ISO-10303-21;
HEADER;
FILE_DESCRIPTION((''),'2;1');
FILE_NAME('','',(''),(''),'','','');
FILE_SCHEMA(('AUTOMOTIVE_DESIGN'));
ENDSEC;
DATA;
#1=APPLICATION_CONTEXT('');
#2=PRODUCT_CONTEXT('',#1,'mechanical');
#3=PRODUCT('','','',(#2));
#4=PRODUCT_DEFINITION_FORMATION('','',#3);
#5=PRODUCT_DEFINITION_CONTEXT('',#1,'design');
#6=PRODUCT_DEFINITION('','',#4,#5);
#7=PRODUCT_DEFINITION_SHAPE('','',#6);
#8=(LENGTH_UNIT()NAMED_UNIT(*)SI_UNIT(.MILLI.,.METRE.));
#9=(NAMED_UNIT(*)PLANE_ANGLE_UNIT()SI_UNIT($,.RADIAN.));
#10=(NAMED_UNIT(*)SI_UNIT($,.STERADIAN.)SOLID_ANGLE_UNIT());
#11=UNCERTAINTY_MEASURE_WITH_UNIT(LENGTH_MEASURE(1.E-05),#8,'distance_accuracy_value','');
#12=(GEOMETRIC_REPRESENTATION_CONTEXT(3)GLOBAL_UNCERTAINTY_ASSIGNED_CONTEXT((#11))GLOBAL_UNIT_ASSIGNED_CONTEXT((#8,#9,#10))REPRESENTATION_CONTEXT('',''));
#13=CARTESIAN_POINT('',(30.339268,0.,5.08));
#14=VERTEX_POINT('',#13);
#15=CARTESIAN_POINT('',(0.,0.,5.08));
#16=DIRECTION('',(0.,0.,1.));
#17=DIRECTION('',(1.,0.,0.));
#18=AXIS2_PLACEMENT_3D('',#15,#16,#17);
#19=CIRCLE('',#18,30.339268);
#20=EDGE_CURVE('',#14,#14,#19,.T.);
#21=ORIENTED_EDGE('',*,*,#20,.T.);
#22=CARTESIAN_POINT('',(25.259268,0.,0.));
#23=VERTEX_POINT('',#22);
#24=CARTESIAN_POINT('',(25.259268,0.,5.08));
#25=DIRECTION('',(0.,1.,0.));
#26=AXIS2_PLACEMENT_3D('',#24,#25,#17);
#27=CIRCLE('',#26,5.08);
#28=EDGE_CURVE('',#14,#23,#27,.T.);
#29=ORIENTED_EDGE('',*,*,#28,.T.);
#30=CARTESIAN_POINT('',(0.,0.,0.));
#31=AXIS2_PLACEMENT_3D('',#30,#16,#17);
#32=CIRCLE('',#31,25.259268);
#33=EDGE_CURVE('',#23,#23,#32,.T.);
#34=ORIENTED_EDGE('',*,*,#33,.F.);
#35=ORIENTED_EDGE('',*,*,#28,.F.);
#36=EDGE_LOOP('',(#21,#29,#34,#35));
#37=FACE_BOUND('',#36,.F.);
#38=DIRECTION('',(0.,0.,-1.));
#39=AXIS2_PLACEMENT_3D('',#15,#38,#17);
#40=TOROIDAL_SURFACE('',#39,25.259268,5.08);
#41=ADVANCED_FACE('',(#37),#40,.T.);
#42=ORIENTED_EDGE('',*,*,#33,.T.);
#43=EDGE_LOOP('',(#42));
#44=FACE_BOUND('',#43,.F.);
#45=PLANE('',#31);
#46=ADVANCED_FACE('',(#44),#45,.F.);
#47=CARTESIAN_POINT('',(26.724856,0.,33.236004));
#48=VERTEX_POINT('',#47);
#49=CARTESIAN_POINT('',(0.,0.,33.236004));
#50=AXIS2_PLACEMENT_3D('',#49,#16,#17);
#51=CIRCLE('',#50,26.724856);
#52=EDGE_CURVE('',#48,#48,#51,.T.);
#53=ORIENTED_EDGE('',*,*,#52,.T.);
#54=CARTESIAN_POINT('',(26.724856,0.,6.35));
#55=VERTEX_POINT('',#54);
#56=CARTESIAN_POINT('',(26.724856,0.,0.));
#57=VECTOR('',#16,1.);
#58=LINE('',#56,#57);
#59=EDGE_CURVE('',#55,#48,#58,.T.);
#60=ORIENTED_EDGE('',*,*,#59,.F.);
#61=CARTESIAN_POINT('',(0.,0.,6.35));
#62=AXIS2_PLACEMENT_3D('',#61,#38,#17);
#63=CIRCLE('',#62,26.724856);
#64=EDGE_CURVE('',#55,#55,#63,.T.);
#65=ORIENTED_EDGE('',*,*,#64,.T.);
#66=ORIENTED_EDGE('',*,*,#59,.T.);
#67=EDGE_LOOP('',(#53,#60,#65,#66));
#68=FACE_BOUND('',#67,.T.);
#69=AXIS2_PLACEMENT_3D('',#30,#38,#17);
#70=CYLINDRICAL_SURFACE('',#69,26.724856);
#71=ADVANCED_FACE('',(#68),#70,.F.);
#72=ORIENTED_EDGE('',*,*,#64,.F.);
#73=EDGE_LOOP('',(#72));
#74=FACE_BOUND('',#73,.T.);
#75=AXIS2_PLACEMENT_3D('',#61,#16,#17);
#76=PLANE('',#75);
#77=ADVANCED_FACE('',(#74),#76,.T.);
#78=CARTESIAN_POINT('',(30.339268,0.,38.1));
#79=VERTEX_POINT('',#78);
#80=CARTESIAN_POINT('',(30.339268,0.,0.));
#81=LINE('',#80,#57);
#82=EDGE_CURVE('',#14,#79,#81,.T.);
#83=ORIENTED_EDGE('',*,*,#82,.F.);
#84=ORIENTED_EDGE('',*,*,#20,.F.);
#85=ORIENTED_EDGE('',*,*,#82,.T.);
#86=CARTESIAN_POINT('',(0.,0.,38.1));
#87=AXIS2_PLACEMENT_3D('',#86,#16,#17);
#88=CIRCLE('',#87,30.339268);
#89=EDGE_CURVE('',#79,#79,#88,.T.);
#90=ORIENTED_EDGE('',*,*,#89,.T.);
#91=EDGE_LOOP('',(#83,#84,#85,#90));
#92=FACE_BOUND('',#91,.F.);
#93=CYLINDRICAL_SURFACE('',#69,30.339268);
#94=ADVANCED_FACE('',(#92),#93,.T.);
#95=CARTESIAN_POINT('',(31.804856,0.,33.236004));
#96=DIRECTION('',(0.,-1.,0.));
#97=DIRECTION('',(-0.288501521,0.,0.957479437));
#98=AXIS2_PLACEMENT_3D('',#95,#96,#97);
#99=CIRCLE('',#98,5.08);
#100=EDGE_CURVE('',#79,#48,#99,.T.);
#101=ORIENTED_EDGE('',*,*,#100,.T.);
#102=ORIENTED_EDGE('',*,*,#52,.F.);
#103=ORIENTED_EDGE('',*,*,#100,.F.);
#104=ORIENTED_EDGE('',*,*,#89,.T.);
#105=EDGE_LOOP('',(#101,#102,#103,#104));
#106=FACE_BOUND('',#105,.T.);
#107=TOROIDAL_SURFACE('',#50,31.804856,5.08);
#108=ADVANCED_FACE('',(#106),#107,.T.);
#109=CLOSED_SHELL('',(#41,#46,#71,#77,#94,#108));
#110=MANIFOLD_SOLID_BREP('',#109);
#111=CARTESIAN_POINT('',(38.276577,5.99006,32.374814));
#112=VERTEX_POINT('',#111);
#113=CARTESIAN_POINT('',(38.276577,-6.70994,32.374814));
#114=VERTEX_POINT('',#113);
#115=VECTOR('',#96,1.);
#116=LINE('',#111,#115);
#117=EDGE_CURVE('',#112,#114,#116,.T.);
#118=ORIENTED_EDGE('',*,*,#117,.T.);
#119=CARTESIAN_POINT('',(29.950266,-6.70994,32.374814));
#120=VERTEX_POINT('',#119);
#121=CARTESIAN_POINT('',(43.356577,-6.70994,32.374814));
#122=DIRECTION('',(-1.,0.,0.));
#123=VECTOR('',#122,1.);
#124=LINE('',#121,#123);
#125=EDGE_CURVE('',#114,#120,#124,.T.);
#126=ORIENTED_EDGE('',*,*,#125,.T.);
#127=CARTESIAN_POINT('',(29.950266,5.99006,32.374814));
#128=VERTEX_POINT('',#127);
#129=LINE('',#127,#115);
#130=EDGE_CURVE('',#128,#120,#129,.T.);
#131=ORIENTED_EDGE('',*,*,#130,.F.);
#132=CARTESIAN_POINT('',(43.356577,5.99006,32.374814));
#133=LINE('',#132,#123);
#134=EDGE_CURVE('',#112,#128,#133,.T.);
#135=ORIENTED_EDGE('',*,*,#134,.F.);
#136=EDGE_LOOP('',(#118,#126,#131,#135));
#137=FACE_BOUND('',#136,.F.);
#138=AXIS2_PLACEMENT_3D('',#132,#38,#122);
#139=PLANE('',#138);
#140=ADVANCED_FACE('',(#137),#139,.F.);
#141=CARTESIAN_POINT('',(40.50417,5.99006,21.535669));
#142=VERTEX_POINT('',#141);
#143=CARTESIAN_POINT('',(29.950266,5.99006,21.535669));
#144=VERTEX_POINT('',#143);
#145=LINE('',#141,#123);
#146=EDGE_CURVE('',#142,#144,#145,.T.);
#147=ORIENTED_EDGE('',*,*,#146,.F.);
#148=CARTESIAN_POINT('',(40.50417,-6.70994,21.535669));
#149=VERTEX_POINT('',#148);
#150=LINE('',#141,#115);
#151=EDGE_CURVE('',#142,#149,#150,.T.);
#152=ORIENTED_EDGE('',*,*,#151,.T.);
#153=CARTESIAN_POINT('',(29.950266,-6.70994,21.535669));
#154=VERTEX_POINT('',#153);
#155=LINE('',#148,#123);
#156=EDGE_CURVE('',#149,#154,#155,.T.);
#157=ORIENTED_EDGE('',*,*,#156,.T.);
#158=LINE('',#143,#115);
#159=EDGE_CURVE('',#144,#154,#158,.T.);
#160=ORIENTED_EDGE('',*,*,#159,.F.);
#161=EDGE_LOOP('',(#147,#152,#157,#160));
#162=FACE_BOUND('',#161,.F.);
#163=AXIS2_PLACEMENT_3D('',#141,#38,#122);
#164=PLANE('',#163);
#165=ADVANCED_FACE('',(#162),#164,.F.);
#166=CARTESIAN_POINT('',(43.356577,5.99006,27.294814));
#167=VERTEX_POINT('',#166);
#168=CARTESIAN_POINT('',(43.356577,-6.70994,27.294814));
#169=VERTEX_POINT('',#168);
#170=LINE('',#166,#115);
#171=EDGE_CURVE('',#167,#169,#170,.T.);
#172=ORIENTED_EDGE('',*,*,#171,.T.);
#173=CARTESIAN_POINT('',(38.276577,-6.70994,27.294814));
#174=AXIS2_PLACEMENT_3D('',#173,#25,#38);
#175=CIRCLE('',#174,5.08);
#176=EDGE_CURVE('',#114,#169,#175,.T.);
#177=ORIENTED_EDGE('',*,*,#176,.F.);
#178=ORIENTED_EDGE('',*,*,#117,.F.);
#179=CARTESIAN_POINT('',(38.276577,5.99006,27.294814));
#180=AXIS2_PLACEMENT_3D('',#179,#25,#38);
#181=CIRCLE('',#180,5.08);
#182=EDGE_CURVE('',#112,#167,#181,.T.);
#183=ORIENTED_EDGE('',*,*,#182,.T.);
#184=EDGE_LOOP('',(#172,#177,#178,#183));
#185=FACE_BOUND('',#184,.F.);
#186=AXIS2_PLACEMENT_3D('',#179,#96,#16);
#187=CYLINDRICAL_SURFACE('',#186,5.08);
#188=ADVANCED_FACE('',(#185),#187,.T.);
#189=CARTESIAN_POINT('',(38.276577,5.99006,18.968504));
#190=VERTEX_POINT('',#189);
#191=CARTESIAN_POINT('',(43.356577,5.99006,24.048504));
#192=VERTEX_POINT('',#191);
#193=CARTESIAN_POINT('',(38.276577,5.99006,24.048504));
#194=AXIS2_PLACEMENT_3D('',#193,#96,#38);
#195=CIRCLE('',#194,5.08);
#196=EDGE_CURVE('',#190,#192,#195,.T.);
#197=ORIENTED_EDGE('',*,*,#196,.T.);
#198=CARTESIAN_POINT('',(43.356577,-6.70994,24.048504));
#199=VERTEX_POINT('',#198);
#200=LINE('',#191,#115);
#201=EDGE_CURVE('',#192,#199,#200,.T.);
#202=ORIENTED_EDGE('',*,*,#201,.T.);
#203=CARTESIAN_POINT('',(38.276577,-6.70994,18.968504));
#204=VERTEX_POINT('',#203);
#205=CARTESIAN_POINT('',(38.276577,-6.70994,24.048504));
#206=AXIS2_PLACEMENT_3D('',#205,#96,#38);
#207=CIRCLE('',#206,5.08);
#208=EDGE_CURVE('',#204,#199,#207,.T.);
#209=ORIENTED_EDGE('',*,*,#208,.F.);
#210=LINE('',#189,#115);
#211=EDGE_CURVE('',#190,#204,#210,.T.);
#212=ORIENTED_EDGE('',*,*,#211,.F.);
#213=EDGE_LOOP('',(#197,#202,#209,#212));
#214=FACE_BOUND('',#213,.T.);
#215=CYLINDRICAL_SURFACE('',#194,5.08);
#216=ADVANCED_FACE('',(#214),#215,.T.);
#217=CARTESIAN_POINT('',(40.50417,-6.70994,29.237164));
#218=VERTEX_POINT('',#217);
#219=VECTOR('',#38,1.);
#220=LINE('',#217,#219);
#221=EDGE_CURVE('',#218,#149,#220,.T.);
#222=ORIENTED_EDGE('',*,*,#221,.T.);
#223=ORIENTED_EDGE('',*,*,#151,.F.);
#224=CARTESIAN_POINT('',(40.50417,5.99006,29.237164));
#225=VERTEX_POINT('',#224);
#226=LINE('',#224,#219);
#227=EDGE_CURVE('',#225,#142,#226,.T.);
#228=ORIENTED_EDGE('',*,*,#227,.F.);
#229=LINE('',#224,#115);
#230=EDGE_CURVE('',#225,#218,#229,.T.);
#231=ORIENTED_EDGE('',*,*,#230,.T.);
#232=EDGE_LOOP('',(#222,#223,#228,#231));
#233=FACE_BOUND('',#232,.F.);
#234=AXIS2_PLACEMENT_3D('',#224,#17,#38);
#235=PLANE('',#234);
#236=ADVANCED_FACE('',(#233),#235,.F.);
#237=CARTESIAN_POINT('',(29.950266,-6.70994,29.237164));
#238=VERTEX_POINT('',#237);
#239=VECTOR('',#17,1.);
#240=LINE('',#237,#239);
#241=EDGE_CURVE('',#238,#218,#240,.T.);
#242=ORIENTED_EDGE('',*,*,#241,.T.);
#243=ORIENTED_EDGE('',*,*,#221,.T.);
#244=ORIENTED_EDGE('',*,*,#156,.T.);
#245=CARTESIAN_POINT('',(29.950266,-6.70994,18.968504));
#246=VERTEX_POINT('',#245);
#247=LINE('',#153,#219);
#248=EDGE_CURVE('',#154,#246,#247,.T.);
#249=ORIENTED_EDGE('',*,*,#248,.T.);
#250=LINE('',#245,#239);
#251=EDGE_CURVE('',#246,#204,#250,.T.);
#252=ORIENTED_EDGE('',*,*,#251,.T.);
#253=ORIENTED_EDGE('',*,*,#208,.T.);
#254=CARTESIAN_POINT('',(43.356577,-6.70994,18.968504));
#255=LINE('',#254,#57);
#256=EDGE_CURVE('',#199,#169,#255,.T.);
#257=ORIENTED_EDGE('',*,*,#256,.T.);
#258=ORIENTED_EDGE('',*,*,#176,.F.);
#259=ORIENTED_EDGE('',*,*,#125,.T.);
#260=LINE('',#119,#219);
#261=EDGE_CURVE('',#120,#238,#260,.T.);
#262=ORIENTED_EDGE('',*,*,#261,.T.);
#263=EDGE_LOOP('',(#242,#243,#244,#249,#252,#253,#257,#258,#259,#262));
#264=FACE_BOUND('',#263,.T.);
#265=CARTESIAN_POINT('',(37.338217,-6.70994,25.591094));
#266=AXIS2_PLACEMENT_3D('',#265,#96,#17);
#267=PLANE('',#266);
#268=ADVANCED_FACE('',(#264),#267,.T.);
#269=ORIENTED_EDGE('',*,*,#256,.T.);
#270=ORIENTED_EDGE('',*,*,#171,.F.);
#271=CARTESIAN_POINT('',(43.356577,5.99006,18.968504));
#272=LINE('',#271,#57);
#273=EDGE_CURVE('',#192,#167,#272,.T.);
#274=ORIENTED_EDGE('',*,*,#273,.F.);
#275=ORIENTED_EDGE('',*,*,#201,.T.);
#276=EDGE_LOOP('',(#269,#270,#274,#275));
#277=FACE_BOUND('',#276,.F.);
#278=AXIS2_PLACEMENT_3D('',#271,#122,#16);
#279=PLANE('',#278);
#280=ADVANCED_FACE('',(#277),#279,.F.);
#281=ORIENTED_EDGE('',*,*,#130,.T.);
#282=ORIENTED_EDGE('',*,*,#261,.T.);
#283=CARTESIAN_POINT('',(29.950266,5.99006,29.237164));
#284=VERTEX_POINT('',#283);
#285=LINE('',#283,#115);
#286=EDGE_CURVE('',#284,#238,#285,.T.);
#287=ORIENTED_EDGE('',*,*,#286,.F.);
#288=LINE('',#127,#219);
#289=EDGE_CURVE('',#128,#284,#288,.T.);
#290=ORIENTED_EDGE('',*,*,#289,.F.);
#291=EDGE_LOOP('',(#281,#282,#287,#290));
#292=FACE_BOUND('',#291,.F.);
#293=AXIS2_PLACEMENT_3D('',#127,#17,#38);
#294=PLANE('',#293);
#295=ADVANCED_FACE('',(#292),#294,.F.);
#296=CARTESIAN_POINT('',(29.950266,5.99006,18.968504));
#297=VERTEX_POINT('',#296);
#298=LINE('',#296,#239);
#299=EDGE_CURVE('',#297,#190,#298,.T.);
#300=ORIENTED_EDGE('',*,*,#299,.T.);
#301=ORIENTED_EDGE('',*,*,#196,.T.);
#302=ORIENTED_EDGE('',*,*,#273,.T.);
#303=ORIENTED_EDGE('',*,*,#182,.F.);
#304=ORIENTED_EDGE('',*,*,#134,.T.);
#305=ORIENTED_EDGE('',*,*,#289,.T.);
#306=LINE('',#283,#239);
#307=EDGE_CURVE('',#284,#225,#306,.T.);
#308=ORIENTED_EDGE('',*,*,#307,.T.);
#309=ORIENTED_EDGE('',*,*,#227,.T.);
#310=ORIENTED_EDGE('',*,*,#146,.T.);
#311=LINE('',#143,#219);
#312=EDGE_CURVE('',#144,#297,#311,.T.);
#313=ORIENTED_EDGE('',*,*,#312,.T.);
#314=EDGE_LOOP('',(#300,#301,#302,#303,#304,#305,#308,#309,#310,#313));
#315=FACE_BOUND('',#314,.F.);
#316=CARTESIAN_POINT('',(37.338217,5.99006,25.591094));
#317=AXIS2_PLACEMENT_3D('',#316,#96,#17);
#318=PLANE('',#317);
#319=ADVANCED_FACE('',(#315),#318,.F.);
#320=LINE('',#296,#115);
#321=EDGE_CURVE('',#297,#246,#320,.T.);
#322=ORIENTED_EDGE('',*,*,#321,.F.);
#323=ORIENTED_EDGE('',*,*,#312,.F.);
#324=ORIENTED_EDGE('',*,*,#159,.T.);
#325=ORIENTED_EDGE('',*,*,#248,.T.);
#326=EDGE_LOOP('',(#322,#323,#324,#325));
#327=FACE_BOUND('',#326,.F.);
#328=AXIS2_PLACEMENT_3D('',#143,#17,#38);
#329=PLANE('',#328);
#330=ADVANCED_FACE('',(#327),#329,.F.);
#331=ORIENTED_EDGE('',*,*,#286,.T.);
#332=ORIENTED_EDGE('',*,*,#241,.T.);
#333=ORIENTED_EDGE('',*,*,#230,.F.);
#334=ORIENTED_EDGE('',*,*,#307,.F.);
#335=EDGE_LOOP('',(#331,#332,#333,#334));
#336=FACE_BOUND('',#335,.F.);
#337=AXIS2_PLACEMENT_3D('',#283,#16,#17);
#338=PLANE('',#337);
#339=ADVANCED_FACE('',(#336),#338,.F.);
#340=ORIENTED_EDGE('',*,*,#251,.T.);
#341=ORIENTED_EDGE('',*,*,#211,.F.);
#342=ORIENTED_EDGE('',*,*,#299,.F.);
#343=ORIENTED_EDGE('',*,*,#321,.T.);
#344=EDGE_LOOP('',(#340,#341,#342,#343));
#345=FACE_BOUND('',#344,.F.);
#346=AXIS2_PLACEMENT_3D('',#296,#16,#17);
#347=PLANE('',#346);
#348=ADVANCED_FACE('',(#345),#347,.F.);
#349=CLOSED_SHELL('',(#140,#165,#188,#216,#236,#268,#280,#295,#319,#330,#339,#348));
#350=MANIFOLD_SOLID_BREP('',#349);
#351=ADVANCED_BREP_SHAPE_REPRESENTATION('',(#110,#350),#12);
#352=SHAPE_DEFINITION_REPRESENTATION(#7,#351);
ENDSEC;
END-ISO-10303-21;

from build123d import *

# Parameters (mm, degrees)
F0_R     = 30.3392677901
F0_R_2   = 26.724855518
F1_DEPTH = 38.1
F2_R     = 26.7339886214
F3_DEPTH = 6.35
F5_DEPTH = 12.7
F8_R     = 5.08


# Not quite as in the source:
# - a fillet or chamfer that OpenCascade refuses, or shapes differently, is made with other operations: its cross-section is extruded or revolved along the edge and cut away or added


with BuildPart() as f1:
    # F0 (on Top) → F1 (new body)
    with BuildSketch(Plane.XY):
        Circle(F0_R)
        Circle(F0_R_2, mode=Mode.SUBTRACT)
    extrude(amount=F1_DEPTH)

    # F2 (on Top) → F3 (join)
    with BuildSketch(Plane.XY):
        Circle(F2_R)
    extrude(amount=F3_DEPTH)

    # F7: fillet of radius 5.08 on 2 edges, made by hand

    # F7_s1 → F7_t2 (revolve, cut)
    with BuildSketch(Plane.XZ):
        with BuildLine():
            ThreePointArc((30.3392677901, 38.1), (27.7273816887, 36.2659561382), (26.724855518, 33.2360044601))
            Line((26.724855518, 33.2360044601), (26.724855518, 38.1))
            Line((26.724855518, 38.1), (30.3392677901, 38.1))
        make_face()
    revolve(axis=Axis((0, 0, 38.1), (0, 0, 1)), mode=Mode.SUBTRACT)

    # F7_s3 → F7_t4 (revolve, cut)
    with BuildSketch(Plane.XZ):
        with BuildLine():
            ThreePointArc((30.3392677901, 5.08), (28.8513702385, 1.4878975516), (25.2592677901, 0))
            Line((25.2592677901, 0), (30.3392677901, 0))
            Line((30.3392677901, 0), (30.3392677901, 5.08))
        make_face()
    revolve(axis=Axis((0, 0, 0), (0, 0, 1)), mode=Mode.SUBTRACT)


with BuildPart() as f5:
    # F4 (on Front) → F5 (new body)
    with BuildSketch(Plane.XZ):
        Polygon((47.0647066832, 32.3748141527), (33.6583964527, 32.3748141527), (33.6583964527, 29.2371641845), (44.2123003304, 29.2371641845), (44.2123003304, 21.5356685221), (33.6583964527, 21.5356685221), (33.6583964527, 18.9685039222), (47.0647066832, 18.9685039222), align=None)
    extrude(amount=F5_DEPTH)


with BuildPart() as f5_1:
    # F6: moved
    add(f5.part.moved(Location((-3.70813, 5.99006, 0))))

    # F8
    f8_edges = [f5_1.edges().sort_by_distance(p)[0] for p in [
        (43.356577, -0.35994, 32.374814),
        (43.356577, -0.35994, 18.968504),
    ]]
    fillet(f8_edges, radius=F8_R)


solid = Compound([f1.part, f5_1.part])
